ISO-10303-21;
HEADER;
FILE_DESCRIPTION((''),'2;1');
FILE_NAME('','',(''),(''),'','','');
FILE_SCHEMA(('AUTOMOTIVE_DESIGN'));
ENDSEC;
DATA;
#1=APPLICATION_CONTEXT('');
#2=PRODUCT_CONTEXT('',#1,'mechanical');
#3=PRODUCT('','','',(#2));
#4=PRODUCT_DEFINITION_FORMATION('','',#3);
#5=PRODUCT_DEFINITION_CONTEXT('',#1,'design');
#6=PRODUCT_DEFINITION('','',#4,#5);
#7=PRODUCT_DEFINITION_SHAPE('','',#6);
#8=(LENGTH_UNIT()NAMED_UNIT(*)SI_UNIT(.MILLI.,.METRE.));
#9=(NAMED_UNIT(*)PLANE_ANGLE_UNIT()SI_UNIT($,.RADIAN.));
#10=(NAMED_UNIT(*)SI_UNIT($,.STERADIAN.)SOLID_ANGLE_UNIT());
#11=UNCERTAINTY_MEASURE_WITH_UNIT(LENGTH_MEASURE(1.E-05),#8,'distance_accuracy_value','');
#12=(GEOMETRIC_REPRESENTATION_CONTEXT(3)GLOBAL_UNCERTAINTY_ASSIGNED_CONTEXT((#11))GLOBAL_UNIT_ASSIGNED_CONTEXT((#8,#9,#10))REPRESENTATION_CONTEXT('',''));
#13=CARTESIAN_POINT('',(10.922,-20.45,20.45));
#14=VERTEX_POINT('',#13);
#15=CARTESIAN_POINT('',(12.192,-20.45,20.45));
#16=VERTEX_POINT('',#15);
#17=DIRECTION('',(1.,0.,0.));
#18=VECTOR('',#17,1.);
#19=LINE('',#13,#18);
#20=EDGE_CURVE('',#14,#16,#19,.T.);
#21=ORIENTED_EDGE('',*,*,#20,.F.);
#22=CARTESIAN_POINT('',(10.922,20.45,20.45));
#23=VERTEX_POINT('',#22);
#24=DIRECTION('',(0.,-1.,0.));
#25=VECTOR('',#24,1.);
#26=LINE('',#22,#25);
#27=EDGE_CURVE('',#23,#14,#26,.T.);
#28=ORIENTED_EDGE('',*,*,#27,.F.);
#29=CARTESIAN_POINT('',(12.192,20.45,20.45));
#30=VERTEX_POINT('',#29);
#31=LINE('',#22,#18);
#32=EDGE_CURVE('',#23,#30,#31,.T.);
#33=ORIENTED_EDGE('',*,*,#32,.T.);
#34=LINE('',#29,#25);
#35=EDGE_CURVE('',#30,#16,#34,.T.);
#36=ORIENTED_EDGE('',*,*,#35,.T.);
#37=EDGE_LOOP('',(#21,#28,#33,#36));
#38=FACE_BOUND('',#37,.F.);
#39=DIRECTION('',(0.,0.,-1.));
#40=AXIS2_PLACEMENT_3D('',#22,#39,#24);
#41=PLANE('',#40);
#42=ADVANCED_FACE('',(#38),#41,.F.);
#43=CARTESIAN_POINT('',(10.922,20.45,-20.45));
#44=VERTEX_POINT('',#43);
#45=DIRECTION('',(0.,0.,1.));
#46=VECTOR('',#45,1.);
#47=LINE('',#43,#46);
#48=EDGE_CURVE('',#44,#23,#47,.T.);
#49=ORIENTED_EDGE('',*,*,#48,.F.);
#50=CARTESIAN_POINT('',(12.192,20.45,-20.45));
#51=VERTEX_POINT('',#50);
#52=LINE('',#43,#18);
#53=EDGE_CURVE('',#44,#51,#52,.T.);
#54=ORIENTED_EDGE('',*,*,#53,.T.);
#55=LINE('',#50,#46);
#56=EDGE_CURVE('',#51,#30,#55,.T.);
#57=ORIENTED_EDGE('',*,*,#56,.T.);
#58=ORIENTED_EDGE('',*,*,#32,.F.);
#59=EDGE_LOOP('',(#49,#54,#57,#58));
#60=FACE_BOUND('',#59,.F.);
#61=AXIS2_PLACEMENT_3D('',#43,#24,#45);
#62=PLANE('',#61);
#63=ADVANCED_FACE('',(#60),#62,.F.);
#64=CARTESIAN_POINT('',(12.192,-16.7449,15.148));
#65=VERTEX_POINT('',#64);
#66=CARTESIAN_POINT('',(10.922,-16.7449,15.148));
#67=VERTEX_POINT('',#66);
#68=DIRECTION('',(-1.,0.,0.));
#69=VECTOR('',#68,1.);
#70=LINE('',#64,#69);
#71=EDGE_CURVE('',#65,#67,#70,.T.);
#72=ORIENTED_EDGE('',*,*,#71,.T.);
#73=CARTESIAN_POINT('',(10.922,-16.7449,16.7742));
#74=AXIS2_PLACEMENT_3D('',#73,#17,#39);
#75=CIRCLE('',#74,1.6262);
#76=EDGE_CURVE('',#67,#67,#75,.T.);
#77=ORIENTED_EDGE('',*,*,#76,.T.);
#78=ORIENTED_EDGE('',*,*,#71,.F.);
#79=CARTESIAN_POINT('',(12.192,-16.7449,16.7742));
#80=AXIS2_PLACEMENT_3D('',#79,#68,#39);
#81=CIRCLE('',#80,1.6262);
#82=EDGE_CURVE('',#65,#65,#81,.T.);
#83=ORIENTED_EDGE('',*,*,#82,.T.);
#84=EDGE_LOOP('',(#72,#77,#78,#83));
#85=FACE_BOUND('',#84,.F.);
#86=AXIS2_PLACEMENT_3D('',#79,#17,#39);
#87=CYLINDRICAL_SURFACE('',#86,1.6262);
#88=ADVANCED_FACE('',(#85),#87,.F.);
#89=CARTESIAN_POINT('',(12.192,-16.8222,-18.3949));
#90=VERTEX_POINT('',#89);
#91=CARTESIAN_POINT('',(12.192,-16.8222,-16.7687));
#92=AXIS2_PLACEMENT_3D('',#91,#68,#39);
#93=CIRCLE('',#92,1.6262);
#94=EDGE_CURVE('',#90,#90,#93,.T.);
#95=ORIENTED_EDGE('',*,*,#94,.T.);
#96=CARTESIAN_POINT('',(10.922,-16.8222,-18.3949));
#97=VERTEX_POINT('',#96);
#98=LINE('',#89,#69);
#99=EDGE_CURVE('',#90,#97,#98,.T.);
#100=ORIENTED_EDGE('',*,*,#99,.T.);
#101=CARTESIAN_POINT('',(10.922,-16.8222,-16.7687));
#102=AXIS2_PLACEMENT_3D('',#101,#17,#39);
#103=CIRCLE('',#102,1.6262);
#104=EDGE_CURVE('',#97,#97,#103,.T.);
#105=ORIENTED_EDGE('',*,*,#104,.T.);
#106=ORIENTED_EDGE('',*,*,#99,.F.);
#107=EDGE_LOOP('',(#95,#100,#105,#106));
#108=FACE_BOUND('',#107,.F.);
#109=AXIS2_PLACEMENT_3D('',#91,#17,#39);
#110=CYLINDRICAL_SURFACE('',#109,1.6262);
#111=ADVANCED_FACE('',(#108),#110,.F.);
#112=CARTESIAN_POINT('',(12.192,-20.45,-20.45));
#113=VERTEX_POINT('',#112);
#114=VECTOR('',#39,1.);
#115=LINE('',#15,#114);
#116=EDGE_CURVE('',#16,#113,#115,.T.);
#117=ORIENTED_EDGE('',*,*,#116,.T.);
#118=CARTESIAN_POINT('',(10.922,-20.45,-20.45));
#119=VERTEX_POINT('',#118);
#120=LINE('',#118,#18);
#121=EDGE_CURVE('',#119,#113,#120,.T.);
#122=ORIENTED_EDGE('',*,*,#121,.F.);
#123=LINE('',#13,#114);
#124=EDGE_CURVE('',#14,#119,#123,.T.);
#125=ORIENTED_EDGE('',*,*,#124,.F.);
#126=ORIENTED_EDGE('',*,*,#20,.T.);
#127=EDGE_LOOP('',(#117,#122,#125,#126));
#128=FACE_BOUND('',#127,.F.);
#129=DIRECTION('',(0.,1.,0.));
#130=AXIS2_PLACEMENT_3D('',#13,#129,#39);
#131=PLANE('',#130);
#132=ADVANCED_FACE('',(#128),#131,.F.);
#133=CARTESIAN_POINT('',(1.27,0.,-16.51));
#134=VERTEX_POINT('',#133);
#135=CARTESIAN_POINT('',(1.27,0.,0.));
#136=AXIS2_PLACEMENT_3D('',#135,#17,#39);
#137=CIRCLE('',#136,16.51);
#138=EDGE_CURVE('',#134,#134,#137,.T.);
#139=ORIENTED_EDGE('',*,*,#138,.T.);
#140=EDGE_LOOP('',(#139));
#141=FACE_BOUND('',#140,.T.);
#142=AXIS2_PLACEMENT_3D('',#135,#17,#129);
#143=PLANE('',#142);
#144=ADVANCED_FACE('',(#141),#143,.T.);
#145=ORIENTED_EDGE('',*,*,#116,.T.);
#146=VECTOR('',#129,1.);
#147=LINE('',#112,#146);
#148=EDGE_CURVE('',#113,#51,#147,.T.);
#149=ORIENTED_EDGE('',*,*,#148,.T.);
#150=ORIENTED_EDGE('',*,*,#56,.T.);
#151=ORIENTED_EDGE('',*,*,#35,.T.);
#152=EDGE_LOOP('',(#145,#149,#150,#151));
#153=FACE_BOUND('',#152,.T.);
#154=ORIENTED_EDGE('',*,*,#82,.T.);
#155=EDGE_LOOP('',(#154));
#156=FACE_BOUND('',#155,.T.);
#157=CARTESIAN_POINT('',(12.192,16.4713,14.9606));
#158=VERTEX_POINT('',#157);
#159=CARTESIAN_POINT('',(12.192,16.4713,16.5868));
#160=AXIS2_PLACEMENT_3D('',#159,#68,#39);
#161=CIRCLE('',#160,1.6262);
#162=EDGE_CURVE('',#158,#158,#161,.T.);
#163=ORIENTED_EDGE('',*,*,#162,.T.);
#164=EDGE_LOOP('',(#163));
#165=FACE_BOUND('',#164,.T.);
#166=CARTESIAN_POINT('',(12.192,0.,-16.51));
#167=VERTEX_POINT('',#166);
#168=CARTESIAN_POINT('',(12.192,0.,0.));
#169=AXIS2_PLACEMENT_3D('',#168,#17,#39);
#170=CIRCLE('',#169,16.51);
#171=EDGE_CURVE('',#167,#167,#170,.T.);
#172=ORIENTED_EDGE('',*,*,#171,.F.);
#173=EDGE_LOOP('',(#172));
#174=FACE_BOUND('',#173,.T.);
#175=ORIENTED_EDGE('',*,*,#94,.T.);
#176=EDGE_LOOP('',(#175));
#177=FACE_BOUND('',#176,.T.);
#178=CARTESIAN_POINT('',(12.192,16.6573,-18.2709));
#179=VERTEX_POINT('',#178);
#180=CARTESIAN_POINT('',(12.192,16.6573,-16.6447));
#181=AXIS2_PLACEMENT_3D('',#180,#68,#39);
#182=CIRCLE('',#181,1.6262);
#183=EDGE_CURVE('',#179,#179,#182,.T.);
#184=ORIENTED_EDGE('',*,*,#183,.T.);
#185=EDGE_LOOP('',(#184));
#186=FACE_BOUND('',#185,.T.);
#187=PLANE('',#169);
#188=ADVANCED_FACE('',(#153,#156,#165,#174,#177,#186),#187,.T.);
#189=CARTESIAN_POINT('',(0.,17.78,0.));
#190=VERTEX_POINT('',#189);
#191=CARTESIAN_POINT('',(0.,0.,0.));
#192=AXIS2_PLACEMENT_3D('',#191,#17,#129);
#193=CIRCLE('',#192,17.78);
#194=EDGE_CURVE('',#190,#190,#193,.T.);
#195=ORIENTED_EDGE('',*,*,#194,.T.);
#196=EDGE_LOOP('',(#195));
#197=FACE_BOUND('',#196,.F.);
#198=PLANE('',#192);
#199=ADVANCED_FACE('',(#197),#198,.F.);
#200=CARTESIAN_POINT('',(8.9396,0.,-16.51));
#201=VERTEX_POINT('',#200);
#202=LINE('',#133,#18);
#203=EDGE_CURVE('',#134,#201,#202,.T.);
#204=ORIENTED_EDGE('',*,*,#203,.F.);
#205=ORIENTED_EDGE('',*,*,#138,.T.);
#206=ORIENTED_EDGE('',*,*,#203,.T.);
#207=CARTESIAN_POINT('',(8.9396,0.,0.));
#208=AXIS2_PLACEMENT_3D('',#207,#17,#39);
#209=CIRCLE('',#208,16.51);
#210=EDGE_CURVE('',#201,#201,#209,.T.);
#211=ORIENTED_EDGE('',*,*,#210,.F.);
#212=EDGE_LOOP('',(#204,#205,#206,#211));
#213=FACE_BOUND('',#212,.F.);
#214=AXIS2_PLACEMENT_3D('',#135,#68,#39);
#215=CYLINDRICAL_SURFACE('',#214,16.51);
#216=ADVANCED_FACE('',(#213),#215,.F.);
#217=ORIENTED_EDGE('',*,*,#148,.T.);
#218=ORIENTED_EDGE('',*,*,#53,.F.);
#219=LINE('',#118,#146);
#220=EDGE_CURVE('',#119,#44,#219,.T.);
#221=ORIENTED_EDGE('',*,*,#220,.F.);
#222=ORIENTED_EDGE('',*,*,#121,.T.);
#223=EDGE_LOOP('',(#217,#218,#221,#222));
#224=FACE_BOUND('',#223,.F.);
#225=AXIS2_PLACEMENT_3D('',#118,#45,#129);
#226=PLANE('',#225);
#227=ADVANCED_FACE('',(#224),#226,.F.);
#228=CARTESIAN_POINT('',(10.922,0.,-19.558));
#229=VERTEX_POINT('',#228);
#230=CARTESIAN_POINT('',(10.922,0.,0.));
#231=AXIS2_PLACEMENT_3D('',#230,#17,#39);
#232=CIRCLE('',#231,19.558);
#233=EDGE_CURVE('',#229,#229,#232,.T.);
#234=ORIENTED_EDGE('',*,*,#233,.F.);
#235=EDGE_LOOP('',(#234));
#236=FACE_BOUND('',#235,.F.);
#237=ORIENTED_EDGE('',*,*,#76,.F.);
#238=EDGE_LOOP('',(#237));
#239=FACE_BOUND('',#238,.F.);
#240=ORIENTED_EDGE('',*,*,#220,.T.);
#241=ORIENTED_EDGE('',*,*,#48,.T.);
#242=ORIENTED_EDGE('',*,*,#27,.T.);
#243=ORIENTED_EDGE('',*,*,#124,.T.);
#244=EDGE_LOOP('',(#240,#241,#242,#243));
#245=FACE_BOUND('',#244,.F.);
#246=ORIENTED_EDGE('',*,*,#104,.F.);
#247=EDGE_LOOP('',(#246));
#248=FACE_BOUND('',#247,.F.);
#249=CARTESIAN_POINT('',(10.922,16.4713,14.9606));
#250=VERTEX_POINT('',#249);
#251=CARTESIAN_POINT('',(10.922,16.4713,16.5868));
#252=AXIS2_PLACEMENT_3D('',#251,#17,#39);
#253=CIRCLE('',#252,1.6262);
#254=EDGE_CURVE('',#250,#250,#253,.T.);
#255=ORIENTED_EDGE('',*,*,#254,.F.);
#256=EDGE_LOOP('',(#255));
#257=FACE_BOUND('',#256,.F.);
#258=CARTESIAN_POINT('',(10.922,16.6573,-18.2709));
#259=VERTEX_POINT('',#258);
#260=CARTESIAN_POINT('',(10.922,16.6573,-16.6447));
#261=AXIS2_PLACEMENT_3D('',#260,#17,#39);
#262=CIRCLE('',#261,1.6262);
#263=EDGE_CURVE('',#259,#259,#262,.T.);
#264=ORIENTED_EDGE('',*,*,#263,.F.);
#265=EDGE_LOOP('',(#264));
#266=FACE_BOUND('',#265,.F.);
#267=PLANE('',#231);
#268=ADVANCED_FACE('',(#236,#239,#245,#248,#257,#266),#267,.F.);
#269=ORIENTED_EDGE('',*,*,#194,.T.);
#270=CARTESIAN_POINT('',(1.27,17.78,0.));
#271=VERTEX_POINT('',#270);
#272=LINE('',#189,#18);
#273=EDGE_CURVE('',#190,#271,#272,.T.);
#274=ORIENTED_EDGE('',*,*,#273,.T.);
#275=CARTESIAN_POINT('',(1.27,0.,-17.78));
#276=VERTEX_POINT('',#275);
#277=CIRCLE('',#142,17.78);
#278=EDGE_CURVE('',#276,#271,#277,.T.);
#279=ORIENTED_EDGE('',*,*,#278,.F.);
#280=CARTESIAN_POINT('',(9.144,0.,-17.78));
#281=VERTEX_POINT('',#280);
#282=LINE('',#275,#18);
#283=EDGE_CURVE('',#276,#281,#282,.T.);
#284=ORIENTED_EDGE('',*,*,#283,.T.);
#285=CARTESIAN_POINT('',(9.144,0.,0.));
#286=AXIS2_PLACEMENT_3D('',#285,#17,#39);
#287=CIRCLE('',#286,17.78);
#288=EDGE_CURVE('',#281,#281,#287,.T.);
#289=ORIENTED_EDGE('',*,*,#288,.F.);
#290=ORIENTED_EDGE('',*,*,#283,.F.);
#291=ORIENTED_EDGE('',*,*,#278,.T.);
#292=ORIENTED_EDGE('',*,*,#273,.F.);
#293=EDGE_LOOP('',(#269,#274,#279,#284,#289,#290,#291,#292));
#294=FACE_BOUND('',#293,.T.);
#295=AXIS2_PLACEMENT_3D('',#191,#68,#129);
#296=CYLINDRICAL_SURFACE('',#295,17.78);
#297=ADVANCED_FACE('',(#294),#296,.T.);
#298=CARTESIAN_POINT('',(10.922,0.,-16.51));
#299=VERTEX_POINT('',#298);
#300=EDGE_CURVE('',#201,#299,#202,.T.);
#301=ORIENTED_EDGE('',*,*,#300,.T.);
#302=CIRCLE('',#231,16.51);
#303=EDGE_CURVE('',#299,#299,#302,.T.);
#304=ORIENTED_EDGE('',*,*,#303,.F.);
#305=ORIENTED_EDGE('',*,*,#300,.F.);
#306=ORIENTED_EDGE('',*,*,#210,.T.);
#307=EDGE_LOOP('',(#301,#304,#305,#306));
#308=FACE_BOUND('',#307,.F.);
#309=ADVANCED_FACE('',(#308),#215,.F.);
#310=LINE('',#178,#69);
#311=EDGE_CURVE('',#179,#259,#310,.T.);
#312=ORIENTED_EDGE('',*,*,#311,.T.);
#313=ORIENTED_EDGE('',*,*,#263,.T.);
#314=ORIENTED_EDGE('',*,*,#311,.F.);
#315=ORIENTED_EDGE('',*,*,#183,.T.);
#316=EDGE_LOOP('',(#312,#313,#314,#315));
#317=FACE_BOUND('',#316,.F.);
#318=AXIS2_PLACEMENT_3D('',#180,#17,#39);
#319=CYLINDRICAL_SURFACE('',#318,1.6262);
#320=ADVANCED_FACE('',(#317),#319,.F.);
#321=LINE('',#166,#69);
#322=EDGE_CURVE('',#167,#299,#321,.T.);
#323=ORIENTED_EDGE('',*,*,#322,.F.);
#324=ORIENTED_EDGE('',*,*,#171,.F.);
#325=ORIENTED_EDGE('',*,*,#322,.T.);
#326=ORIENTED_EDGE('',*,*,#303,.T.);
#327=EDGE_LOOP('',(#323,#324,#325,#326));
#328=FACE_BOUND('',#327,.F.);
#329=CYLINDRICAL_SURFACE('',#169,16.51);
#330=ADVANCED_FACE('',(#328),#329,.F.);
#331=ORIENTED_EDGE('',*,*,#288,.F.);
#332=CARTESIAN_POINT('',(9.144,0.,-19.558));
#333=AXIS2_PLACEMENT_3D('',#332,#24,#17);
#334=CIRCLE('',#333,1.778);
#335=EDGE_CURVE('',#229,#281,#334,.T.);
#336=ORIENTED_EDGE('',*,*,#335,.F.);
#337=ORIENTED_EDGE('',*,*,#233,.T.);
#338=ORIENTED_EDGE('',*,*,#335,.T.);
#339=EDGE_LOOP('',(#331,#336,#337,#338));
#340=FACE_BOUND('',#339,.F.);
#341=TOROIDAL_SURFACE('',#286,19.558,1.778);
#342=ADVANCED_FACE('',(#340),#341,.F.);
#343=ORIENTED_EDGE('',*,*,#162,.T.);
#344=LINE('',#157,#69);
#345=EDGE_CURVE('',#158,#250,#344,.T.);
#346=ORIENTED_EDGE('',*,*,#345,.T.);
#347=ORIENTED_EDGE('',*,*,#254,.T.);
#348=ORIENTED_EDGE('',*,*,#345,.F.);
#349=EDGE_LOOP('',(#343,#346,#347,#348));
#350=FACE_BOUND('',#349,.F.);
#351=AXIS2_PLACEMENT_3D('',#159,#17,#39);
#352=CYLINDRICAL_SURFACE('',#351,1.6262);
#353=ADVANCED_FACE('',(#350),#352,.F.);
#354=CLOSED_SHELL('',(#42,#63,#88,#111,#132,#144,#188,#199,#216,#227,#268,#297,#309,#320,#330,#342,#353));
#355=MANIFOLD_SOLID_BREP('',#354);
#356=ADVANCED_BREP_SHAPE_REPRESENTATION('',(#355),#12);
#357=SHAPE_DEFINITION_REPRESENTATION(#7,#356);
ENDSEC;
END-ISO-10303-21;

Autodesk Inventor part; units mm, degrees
ref_plane "YZ Plane" through (0, 0, 0) normal (1, 0, 0) x (0, 1, 0)
ref_plane "XZ Plane" through (0, 0, 0) normal (0, 1, 0) x (-1, 0, 0)
ref_plane "XY Plane" through (0, 0, 0) normal (0, 0, 1) x (1, 0, 0)
sketch "Sketch1" plane through (0, 0, 0) normal (1, 0, 0) x (0, 1, 0)
  circle A0 centre (0, 0) radius 17.78
  dimension "d0" = 35.56
extrude "Extrusion1" add sketch "Sketch1" along normal blind 1.27
sketch "Sketch2" plane through (1.27, 0, 0) normal (1, 0, 0) x (0, 0, -1)
  circle A0 centre (0, 0) radius 17.78
  circle A1 centre (0, 0) radius 16.51
  dimension "d3" = 35.56
  dimension "d4" = 33.02
extrude "Extrusion2" add sketch "Sketch2" along normal blind 9.652
sketch "Sketch3" plane through (10.922, 0, 0) normal (1, 0, 0) x (0, 0, -1)
  line L0 (-20.45, -20.45) -> (20.45, -20.45)
  line L1 (20.45, -20.45) -> (20.45, 20.45)
  line L2 (20.45, 20.45) -> (-20.45, 20.45)
  line L3 (-20.45, 20.45) -> (-20.45, -20.45)
  line L4 (-20.45, -20.45) -> (20.45, 20.45) construction
  line L5 (20.45, -20.45) -> (-20.45, 20.45) construction
  point P0 (0, 0)
  dimension "d7" = 40.9
  dimension "d8" = 40.9
extrude "Extrusion3" add sketch "Sketch3" along normal blind 1.27
sketch "Sketch4" plane through (12.192, 0, 0) normal (1, 0, 0) x (0, 0, -1)
  circle A0 centre (0, 0) radius 16.51
  line L0 (-20.45, 20.45) -> (-20.45, -20.45) projected
  line L1 (20.45, -20.45) -> (20.45, 20.45) projected
  line L2 (-20.45, -20.45) -> (20.45, -20.45) projected
  line L3 (20.45, 20.45) -> (-20.45, 20.45) projected
  line L4 (-16.7742, -16.7449) -> (16.7742, -16.745)
  line L5 (16.7742, -16.745) -> (16.7742, 16.745)
  line L6 (16.7742, 16.745) -> (-16.7742, 16.7449)
  line L7 (-16.7742, 16.7449) -> (-16.7742, -16.7449)
  line L8 (-16.7742, -16.7449) -> (16.7742, 16.745) construction
  line L9 (16.7742, -16.745) -> (-16.7742, 16.7449) construction
  circle A1 centre (-16.7742, -16.7449) radius 1.6262
  circle A2 centre (16.7687, -16.8222) radius 1.6262
  circle A3 centre (16.6447, 16.6573) radius 1.6262
  circle A4 centre (-16.5868, 16.4713) radius 1.6262
  dimension "d18" = 33.02
  dimension "d25" = 40.9
  dimension "d32" = 33.4899
  dimension "d33" = 33.5483
  dimension "d34" = 3.2524
  dimension "d35" = 3.2524
  dimension "d36" = 3.2524
  dimension "d37" = 3.2524
extrude "Extrusion4" cut sketch "Sketch4" against normal blind 3.2524 contours A0 | L7 A1 L4 | L4 A1 L7 | A2 L5 L4 | L4 L5 A2 | A4 L6 L7 | L7 L6 A4 | A3 L6 L5 | L5 L6 A3
fillet "Fillet1" radius 1.778 1 edges at (10.922, 0, 17.78)
sketch "Sketch5" plane through (0, 0, 0) normal (-1, 0, 0) x (0, 0, 1)
  point P0 (0, 0)
equation "\"d16\" = d35"
properties part number "MagnetCap"
